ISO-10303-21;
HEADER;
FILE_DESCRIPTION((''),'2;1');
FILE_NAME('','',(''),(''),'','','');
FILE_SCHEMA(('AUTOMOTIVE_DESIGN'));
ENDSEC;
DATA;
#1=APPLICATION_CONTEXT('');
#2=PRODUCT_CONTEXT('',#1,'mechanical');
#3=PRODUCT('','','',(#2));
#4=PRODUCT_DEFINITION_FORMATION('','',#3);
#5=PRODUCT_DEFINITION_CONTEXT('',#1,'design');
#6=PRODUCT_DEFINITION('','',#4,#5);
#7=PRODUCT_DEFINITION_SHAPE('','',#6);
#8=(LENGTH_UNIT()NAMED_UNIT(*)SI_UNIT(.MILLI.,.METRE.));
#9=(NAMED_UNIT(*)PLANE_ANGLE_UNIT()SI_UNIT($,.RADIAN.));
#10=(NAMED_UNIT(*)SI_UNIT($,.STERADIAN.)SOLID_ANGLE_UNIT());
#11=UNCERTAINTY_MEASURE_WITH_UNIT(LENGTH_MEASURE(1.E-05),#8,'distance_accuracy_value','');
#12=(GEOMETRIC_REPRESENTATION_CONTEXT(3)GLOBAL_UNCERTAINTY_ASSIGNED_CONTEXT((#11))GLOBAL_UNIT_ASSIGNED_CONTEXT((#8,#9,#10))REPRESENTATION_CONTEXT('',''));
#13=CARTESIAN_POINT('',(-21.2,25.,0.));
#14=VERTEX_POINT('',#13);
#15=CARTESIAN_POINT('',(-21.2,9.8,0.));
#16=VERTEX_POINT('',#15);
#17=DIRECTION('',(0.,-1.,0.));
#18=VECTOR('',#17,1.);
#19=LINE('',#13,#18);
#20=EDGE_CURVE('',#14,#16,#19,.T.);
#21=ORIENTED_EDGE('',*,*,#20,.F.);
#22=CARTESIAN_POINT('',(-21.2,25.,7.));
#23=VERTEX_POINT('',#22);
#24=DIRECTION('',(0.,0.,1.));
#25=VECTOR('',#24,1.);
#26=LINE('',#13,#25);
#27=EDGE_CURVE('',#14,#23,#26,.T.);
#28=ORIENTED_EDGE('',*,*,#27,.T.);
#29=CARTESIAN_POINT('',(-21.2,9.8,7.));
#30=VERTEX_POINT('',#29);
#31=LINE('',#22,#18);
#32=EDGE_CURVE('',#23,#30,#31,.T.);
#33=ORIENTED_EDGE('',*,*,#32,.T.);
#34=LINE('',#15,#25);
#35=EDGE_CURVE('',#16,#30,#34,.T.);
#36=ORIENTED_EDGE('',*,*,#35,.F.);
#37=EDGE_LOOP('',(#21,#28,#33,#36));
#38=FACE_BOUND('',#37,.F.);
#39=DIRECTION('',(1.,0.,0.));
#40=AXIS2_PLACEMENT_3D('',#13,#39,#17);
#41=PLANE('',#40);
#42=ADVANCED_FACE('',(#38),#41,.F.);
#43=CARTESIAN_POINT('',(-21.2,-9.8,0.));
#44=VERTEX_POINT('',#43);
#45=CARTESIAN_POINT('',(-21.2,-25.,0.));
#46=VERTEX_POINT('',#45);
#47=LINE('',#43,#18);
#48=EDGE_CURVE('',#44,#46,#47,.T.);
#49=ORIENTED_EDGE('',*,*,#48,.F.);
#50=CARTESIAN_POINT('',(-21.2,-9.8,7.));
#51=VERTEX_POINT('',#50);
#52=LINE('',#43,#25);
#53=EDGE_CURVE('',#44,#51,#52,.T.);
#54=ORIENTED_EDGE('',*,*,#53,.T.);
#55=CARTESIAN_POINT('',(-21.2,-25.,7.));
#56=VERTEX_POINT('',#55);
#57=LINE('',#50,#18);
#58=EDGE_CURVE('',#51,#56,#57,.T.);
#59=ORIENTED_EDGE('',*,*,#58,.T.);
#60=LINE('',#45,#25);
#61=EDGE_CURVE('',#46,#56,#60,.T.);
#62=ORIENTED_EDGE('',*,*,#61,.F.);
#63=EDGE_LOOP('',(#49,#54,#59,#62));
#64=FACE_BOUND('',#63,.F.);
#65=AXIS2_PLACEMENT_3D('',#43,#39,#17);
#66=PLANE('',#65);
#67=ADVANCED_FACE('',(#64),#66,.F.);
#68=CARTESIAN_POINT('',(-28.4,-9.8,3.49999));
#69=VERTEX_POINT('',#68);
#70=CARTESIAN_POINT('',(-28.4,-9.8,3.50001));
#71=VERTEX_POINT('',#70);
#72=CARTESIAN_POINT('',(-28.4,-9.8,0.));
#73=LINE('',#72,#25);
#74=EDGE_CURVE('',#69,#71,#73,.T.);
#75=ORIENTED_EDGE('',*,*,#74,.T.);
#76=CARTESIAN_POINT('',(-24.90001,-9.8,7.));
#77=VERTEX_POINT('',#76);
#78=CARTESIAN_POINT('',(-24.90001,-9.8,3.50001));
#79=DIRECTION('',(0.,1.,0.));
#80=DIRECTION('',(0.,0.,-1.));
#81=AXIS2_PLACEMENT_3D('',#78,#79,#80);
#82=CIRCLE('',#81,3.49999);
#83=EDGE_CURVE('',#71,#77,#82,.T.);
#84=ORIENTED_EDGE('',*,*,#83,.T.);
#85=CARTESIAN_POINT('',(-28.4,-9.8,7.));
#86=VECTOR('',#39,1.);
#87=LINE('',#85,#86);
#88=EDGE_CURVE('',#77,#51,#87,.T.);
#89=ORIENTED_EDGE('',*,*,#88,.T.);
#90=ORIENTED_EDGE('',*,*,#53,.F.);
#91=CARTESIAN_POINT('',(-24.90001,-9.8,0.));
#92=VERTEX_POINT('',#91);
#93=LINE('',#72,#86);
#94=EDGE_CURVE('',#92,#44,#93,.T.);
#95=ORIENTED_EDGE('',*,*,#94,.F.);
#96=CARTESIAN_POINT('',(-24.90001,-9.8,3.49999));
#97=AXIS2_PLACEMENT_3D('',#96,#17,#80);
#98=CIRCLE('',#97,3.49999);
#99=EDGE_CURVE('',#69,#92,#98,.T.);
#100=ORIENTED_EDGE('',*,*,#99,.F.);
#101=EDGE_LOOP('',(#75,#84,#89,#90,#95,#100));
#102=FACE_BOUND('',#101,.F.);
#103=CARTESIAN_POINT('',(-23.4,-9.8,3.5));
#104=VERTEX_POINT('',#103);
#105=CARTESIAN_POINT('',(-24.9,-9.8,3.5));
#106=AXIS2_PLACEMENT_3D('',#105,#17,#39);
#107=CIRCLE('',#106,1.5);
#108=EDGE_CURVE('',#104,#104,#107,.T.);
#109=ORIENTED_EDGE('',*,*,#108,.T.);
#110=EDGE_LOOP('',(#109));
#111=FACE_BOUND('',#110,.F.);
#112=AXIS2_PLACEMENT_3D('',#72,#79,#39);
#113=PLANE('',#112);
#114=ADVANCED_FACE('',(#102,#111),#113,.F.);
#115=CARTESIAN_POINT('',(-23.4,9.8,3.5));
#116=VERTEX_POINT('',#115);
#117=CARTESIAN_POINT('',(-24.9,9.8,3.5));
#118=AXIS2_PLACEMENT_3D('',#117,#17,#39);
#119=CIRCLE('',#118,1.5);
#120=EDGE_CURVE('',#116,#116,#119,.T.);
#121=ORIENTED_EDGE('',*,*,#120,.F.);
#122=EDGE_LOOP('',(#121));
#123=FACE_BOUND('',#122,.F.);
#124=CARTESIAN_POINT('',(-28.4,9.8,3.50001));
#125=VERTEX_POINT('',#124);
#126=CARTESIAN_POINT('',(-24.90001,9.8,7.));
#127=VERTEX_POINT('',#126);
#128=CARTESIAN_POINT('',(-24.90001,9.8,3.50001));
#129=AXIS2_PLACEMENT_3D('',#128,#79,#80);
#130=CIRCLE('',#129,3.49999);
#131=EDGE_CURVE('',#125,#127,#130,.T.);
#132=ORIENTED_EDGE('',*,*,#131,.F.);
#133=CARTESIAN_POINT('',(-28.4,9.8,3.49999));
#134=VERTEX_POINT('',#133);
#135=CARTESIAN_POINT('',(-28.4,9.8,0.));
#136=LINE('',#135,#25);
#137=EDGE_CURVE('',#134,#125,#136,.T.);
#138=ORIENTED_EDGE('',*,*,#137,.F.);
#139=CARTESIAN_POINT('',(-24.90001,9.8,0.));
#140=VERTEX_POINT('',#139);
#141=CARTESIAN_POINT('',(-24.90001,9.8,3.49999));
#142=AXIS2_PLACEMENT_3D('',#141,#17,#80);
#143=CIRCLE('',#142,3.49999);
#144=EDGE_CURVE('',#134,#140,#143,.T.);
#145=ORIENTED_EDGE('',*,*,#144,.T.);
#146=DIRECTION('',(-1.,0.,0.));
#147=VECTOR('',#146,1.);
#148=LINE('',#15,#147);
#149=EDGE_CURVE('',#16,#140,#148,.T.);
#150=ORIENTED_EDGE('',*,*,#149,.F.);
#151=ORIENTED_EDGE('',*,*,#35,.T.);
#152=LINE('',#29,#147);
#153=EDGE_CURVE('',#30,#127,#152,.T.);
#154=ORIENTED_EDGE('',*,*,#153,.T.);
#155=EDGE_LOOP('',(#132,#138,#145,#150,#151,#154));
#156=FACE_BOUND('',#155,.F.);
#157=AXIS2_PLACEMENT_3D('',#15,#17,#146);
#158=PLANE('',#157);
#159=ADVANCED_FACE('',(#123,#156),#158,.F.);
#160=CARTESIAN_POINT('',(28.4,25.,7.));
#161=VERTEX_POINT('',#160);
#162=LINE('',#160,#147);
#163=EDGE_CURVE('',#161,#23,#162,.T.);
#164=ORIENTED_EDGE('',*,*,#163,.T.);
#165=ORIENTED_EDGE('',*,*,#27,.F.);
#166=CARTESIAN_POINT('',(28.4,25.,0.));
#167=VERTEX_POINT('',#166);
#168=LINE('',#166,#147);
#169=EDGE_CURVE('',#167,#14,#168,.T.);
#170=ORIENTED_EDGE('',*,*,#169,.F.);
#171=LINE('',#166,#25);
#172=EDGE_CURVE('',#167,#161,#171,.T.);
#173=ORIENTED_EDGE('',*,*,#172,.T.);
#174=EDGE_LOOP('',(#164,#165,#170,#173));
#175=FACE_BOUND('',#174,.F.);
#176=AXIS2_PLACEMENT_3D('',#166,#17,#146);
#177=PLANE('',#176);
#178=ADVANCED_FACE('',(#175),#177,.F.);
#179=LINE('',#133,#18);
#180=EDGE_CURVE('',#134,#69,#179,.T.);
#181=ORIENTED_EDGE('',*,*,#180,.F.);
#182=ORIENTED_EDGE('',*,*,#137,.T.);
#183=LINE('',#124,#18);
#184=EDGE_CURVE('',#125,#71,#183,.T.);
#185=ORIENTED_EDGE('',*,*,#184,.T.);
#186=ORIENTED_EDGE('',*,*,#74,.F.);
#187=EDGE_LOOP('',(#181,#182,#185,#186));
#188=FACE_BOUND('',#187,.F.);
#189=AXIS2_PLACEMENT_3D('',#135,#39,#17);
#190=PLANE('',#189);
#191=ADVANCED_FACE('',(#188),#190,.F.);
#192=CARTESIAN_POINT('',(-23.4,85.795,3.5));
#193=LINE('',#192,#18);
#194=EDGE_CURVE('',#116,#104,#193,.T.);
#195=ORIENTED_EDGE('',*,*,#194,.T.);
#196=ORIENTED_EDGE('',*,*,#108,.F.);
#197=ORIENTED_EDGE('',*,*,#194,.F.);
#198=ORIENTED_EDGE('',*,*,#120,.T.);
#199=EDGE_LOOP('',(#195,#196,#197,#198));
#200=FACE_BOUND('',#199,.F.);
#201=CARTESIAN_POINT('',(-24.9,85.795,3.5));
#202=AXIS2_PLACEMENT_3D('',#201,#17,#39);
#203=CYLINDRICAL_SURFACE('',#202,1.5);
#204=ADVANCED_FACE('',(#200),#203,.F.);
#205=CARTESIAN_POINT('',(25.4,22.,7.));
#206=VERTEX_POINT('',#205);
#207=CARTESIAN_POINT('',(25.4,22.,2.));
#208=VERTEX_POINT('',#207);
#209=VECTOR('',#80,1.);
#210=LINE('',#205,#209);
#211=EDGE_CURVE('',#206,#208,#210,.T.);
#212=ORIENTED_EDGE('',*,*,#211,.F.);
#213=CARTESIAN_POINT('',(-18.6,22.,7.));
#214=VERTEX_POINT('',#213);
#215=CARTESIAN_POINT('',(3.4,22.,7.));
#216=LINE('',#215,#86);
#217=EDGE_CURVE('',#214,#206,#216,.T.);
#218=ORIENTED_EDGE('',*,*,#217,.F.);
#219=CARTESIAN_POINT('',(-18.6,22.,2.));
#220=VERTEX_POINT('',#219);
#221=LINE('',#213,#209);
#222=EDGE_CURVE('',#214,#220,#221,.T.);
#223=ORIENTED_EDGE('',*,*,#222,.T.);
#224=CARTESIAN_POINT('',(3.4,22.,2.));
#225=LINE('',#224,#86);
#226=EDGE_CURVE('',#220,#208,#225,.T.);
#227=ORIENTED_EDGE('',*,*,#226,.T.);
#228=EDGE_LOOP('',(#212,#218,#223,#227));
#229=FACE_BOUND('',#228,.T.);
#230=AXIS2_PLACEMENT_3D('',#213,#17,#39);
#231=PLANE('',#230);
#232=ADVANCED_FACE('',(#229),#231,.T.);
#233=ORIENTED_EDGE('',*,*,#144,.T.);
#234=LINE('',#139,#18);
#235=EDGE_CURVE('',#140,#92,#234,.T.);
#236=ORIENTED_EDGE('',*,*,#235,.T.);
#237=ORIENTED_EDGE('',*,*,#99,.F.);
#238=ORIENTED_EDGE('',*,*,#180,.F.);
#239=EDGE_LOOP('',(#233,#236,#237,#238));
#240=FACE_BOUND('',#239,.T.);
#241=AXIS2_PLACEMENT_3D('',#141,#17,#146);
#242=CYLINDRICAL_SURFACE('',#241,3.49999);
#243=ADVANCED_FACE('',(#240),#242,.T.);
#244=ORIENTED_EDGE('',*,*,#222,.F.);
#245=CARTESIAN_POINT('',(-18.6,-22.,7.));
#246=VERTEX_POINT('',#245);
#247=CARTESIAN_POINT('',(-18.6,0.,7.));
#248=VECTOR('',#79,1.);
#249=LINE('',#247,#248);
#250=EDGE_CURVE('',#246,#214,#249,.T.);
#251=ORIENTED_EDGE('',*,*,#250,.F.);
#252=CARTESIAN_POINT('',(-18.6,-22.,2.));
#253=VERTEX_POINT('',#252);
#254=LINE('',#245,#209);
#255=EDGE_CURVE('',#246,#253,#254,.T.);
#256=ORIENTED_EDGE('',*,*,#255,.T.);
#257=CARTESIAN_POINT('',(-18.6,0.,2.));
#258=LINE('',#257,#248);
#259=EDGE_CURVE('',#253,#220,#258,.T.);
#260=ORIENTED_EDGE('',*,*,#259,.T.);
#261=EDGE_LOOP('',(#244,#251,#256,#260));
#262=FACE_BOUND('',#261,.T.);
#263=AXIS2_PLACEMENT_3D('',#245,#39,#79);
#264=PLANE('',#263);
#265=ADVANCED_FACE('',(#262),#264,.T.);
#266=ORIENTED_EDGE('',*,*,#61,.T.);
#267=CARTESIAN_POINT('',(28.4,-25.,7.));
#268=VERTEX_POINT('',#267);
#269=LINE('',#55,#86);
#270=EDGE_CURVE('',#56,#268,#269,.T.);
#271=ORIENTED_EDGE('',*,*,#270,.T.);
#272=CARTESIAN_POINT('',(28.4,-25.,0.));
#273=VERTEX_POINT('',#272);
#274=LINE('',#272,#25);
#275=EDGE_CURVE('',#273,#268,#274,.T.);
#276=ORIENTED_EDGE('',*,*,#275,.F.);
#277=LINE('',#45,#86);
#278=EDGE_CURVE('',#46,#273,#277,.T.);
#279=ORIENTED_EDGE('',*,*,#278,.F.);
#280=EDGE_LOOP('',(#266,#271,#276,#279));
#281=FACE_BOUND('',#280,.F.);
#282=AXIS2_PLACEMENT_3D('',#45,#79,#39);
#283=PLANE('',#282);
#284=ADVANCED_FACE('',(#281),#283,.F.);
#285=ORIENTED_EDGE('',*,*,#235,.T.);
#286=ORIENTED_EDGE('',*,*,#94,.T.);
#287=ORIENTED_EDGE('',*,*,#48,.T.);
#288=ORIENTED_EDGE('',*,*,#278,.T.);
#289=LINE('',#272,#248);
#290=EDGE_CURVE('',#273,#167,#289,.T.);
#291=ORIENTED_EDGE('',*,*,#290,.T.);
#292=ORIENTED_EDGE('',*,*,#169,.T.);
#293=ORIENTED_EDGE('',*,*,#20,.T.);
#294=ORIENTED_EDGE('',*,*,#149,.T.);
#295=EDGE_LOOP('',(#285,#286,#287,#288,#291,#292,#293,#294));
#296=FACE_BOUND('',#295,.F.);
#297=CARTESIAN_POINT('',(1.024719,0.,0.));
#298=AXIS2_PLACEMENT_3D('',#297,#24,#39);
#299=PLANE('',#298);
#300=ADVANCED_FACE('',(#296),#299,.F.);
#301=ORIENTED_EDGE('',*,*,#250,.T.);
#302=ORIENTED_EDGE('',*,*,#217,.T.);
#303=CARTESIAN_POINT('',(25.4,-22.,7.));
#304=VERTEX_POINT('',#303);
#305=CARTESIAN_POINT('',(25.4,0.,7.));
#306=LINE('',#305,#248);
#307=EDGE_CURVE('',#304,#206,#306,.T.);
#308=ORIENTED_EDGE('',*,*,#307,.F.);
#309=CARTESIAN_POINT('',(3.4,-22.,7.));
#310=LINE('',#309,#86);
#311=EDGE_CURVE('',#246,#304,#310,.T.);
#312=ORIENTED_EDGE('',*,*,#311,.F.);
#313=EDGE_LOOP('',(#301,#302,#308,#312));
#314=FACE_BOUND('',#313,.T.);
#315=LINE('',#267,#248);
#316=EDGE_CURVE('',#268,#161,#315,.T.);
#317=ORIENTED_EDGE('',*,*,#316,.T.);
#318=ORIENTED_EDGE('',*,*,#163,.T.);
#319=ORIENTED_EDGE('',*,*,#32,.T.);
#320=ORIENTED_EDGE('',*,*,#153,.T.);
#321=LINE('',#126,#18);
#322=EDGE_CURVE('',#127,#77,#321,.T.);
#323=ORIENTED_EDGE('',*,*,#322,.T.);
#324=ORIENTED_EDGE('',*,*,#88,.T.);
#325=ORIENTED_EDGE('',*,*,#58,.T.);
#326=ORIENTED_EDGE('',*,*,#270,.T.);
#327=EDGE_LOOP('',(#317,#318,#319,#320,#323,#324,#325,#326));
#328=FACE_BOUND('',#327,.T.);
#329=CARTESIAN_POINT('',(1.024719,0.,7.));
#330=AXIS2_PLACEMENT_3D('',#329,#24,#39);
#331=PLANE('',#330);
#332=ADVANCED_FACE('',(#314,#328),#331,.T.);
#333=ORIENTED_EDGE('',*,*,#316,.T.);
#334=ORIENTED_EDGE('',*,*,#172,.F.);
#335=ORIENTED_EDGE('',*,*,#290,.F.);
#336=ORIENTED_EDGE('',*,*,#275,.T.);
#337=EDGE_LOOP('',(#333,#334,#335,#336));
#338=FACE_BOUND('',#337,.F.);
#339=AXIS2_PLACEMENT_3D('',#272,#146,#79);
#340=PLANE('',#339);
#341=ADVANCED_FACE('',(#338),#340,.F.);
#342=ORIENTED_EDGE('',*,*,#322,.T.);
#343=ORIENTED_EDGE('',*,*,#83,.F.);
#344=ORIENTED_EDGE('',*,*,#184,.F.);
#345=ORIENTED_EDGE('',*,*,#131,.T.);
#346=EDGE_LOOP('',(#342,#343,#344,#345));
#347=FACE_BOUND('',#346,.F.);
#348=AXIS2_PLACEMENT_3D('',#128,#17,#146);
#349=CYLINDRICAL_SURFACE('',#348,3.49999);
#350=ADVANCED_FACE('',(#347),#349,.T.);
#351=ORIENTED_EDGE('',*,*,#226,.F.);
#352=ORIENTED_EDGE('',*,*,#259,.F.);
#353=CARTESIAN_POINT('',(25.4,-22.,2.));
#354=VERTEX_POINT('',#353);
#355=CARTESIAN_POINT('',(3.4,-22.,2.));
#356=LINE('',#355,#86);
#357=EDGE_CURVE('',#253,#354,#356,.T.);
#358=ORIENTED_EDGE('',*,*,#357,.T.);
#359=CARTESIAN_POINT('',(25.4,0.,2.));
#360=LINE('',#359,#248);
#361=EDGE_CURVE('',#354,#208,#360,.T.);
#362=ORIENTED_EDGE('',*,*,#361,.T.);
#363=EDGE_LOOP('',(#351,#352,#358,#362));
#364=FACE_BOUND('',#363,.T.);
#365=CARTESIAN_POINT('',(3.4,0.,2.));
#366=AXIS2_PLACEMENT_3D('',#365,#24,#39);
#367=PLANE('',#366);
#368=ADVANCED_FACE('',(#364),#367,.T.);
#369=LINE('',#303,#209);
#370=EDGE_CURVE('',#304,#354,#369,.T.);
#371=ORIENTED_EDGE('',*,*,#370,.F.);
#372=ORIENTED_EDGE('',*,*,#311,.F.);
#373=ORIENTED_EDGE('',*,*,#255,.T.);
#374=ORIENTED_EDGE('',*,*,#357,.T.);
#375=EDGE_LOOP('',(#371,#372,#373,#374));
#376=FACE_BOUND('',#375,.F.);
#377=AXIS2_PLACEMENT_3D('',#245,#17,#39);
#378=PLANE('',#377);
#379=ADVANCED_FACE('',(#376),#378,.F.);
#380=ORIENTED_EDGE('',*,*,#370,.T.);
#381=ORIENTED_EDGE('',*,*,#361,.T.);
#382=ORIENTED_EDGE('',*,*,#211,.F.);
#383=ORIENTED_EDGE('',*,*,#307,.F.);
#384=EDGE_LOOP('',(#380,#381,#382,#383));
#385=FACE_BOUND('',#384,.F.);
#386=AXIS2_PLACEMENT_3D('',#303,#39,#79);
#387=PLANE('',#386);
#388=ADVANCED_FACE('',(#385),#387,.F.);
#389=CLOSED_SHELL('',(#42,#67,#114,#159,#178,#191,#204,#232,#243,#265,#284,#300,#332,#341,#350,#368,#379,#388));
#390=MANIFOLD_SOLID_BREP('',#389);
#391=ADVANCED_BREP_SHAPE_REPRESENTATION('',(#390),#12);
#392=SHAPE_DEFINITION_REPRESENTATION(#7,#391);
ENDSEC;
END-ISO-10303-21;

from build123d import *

# Parameters (mm, degrees)
F1_DEPTH = 7
F2_R     = 3.49999
F4_D     = 3
F5_W     = 44
F5_H     = 44
F6_DEPTH = 5


# Not quite as in the source:
# - a fillet or chamfer is up to 0.001 mm smaller than in the source, because OpenCascade refuses the exact size


with BuildPart() as f1:
    # F0 (on Top) → F1 (new body)
    with BuildSketch(Plane.XY):
        Polygon((28.4, 25), (-21.2, 25), (-21.2, 9.8), (-28.4, 9.8), (-28.4, -9.8), (-21.2, -9.8), (-21.2, -25), (28.4, -25), align=None)
    extrude(amount=F1_DEPTH)

    # F2 (radius 3.5 in the source; OpenCascade refuses exactly that, so slightly less here)
    f2_edges = [f1.edges().sort_by_distance(p)[0] for p in [
        (-28.4, 0, 7),
        (-28.4, 0, 0),
    ]]
    fillet(f2_edges, radius=F2_R)

    # F4 (through all)
    with Locations(Plane(origin=(0, 9.8, 0), x_dir=(-1, 0, 0), z_dir=(0, 1, 0))):
        with Locations((24.9, 3.5)):
            Hole(F4_D / 2)

    # F5 (on face) → F6 (cut)
    with BuildSketch(Plane.XY.offset(7)):
        with Locations((3.4, 0)):
            Rectangle(F5_W, F5_H)
    extrude(amount=-F6_DEPTH, mode=Mode.SUBTRACT)


solid = f1.part
